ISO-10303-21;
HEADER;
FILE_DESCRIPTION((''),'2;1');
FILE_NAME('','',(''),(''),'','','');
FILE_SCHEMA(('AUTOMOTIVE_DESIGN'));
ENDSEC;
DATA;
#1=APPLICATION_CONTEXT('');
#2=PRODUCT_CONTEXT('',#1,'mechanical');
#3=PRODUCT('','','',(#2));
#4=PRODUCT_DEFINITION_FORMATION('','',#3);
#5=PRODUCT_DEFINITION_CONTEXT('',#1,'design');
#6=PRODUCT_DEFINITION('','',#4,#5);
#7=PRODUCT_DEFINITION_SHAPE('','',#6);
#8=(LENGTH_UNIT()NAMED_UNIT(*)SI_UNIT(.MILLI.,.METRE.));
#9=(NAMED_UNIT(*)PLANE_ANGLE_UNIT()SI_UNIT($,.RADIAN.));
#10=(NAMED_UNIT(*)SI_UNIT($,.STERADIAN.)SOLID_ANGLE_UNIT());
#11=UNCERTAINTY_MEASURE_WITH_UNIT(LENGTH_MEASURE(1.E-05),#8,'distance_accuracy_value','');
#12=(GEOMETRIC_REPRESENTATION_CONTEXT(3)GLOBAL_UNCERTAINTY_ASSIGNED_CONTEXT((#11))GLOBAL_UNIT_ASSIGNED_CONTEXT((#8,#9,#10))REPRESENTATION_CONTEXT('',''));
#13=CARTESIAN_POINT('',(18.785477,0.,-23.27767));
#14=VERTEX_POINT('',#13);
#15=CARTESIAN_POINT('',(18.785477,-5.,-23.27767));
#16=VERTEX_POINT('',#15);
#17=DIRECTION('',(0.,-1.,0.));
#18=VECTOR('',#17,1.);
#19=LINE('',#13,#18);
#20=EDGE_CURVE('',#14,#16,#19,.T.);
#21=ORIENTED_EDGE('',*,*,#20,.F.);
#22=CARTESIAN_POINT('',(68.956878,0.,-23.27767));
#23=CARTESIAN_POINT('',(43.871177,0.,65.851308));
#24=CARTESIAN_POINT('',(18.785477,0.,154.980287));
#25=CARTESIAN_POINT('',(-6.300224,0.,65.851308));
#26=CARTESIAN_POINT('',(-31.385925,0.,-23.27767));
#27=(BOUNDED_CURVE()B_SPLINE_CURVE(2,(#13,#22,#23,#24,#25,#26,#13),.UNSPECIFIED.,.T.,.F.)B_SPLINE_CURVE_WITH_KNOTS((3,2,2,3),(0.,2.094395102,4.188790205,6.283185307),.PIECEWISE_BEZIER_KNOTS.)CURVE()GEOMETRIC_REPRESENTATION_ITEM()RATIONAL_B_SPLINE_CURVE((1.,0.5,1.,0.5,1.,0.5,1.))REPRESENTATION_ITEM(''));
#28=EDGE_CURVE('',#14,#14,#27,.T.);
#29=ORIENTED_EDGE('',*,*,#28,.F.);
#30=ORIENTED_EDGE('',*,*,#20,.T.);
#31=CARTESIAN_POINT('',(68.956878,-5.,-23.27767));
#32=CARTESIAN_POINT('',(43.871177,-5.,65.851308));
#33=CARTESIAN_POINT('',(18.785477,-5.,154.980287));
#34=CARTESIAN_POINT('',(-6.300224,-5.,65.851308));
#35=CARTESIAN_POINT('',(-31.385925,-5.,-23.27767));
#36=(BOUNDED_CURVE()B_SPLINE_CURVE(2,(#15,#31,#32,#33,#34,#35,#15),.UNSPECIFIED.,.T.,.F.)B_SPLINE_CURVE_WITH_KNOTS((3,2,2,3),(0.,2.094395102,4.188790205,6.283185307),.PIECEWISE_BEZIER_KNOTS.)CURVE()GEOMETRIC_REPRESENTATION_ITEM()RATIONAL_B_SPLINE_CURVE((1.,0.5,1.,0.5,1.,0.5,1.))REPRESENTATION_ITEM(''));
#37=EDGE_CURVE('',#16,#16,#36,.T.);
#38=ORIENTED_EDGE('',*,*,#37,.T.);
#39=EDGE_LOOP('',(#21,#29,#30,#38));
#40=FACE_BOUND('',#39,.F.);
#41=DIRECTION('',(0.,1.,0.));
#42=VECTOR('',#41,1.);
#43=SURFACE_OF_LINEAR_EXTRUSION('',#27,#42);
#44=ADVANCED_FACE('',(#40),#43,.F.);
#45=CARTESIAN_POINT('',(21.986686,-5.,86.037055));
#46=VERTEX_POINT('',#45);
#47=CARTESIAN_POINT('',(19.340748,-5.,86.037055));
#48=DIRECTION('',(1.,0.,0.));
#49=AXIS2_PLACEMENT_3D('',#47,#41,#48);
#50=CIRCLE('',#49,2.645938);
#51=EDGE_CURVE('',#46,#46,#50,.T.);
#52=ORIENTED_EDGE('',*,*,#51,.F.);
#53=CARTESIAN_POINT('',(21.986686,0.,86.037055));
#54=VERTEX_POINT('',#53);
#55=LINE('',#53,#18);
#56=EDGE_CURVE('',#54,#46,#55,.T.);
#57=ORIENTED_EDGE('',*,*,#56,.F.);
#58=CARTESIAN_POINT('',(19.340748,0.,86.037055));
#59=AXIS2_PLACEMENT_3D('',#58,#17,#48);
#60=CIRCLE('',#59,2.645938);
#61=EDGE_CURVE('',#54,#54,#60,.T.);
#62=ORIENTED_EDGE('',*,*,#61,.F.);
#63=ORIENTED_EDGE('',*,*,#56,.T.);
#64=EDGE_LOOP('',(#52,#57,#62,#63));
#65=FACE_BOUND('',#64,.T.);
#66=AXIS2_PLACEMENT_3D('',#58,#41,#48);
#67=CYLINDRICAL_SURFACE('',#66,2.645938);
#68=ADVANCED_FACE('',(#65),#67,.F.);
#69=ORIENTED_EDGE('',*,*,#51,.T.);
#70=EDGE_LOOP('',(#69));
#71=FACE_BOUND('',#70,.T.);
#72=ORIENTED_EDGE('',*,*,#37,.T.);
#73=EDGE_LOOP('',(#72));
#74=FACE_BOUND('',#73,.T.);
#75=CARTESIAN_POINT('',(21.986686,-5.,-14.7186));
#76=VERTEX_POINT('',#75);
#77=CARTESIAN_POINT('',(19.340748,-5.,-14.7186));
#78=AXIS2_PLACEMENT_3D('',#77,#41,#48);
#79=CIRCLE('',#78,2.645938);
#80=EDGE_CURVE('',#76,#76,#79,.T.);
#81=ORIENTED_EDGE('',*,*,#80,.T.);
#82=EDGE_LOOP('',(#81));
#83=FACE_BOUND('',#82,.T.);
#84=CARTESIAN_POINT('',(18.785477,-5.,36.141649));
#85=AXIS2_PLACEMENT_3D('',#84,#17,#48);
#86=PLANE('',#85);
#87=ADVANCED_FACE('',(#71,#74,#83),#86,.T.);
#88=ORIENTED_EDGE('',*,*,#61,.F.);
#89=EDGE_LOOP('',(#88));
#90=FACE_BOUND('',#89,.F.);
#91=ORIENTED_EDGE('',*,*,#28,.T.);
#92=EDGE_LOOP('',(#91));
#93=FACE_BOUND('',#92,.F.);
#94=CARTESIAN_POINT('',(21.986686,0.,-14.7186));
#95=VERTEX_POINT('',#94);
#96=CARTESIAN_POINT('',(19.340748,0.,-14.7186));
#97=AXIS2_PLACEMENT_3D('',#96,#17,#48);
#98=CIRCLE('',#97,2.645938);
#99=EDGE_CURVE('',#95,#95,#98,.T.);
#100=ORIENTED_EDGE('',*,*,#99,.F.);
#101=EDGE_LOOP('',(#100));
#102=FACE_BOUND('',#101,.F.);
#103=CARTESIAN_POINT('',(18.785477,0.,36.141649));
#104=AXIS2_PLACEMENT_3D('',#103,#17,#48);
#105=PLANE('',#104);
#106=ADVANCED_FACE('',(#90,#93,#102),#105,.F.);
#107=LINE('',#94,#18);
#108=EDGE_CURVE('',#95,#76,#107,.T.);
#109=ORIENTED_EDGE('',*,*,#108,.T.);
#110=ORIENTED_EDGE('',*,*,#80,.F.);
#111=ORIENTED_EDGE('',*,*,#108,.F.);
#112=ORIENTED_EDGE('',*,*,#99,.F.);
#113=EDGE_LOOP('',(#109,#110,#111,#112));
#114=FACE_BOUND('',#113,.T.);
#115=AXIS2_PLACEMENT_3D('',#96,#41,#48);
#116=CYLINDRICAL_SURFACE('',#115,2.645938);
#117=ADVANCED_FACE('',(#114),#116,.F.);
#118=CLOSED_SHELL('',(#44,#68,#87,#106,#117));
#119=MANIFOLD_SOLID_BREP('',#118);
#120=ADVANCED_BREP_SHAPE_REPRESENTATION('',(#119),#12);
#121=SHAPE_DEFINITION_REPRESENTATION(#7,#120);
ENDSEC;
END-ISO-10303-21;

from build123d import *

# Parameters (mm, degrees)
F1_DEPTH = 5
F2_R     = 2.6459382912
F3_DEPTH = 25


# Not quite as in the source:
# - a feature names something its author has since deleted; it is built from what else it names


with BuildPart() as f1:
    # F0 (on Front) → F1 (new body)
    with BuildSketch(Plane.XZ):
        with BuildLine():
            add(Edge.make_bspline(
                [(18.7854766846, -23.277670145), (68.9568782657, -23.277670145), (43.8711774751, 65.8513084054), (18.7854766846, 154.9802869558), (-6.300224106, 65.8513084054), (-31.3859248966, -23.277670145), (18.7854766846, -23.277670145)],
                knots=[0, 0, 0, 2.0943951024, 2.0943951024, 4.1887902048, 4.1887902048, 6.2831853072, 6.2831853072, 6.2831853072], degree=2, weights=[1, 0.5, 1, 0.5, 1, 0.5, 1]))
        make_face()
    extrude(amount=F1_DEPTH)

    # F2 (on face) → F3 (cut)
    with BuildSketch(Plane.XZ):
        with Locations((19.3407479674, 86.0370546579)):
            Circle(F2_R)
        with Locations((19.3407479674, -14.7185996175)):
            Circle(F2_R)
    extrude(amount=F3_DEPTH, mode=Mode.SUBTRACT)


solid = f1.part
